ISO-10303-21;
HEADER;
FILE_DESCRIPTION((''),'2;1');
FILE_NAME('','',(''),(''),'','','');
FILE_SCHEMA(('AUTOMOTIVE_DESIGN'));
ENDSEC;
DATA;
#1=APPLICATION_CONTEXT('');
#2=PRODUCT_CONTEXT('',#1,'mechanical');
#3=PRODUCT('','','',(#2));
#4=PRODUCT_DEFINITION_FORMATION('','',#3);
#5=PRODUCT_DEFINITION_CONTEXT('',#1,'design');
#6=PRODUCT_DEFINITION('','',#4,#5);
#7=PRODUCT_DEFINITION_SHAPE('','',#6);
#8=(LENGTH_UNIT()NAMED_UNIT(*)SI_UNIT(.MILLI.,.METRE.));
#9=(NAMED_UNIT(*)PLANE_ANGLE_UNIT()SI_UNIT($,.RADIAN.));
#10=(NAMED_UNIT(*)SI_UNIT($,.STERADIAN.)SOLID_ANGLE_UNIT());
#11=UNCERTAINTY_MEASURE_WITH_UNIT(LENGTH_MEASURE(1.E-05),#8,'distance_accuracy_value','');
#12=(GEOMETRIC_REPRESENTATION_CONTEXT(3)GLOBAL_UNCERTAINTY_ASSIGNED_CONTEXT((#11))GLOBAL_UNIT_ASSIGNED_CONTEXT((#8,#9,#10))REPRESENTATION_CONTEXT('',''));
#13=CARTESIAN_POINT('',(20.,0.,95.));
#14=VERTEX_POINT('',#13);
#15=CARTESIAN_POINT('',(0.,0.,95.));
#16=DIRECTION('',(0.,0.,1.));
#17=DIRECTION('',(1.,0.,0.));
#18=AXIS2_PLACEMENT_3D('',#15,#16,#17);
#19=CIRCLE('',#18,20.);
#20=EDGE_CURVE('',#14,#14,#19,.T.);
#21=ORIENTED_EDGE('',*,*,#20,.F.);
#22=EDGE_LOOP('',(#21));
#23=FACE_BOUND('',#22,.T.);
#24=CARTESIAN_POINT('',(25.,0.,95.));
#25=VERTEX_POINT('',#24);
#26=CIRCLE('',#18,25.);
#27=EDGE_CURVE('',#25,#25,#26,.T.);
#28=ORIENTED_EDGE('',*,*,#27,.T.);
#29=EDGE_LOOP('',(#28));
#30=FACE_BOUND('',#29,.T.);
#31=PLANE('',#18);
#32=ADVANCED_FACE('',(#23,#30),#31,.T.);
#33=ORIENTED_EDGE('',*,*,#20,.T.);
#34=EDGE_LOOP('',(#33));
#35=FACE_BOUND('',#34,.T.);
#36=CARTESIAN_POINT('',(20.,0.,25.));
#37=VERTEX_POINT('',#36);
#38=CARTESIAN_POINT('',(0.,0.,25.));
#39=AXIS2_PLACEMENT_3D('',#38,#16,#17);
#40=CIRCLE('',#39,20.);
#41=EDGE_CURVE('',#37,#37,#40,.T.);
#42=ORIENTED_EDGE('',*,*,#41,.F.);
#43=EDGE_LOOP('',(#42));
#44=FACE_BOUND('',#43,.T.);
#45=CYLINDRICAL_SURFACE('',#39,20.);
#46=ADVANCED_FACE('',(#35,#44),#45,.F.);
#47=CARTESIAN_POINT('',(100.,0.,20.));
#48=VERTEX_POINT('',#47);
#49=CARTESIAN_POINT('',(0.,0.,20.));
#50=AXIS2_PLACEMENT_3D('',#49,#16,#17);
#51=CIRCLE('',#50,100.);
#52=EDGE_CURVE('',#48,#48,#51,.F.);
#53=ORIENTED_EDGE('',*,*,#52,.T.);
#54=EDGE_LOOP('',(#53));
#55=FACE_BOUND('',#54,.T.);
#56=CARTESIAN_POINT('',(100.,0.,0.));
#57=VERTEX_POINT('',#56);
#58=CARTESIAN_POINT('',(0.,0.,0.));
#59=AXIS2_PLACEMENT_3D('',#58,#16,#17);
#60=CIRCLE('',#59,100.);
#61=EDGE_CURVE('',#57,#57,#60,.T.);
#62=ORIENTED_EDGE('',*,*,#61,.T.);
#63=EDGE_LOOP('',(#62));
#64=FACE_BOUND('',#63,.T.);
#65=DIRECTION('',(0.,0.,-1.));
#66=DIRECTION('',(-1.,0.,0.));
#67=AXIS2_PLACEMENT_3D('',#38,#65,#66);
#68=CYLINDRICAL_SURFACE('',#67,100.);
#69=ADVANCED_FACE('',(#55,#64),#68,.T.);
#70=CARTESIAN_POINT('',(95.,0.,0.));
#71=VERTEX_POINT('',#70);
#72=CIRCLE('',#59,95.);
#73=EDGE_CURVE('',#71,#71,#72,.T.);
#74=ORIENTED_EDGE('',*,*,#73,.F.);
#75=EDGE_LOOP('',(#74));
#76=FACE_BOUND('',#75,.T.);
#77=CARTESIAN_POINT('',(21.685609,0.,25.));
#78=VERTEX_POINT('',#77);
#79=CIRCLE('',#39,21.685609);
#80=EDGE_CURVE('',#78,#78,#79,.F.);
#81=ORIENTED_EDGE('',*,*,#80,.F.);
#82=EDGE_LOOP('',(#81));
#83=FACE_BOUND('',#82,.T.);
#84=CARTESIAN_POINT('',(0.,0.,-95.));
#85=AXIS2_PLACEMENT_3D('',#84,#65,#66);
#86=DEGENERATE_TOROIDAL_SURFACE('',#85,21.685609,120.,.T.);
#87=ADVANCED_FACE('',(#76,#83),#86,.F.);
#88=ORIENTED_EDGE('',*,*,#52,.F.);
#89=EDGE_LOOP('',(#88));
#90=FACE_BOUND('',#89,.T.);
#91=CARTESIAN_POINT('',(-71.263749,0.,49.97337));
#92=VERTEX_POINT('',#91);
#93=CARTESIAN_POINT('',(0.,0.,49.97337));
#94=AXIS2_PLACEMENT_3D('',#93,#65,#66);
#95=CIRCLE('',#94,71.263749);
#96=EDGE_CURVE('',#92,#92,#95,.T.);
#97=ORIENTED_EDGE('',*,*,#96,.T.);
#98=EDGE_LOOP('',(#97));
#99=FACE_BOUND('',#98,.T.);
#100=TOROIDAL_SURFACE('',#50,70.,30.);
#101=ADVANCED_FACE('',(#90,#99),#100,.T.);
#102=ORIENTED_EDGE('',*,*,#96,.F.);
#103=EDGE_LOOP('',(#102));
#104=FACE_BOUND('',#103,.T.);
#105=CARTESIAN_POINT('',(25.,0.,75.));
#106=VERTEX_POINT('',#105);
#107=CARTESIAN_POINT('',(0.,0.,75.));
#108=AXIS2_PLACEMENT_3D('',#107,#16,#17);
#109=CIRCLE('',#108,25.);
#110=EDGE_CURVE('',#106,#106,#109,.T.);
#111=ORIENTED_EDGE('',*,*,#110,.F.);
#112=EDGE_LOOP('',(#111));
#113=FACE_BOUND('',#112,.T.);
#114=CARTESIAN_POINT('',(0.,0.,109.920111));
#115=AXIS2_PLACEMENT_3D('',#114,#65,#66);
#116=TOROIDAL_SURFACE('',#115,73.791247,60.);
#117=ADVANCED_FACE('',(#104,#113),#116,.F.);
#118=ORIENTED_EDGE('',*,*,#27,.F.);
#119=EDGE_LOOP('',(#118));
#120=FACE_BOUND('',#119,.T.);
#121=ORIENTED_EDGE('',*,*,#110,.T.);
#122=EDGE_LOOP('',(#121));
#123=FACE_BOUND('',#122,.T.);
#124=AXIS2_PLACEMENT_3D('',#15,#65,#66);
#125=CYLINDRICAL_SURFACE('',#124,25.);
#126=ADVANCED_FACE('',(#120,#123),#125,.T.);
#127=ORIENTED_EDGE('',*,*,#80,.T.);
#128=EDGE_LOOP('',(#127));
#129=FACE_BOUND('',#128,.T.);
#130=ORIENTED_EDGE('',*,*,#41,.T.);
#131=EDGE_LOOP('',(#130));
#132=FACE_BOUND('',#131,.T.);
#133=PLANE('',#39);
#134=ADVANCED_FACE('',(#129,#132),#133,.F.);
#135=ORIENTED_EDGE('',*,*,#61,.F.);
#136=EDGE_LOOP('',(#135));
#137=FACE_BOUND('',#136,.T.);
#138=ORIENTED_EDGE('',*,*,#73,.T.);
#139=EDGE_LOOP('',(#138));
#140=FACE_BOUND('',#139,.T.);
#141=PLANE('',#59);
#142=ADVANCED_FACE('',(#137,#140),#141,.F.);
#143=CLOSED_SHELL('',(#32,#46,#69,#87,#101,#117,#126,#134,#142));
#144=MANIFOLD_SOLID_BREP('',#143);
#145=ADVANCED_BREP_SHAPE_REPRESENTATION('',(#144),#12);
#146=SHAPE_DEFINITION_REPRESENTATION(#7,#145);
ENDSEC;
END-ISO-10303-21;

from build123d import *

# Parameters (mm, degrees)
SKETCH1_R           = 100
SKETCH1_R_2         = 95
BOSS_EXTRUDE1_DEPTH = 25
SKETCH2_R           = 100
BOSS_EXTRUDE2_DEPTH = 25
SKETCH3_R           = 20
CUT_EXTRUDE1_DEPTH  = 25
BOSS_EXTRUDE3_START = 25
SKETCH4_R           = 25
SKETCH4_R_2         = 20
BOSS_EXTRUDE3_DEPTH = 25
FILLET1_R           = 30
FILLET2_R           = 120
FILLET3_R           = 60
BOSS_EXTRUDE4_START = 20
SKETCH5_R           = 25
SKETCH5_R_2         = 20
BOSS_EXTRUDE4_DEPTH = 20


with BuildPart() as part:
    # Sketch1 → Boss-Extrude1 (new body)
    with BuildSketch(Plane.XY):
        Circle(SKETCH1_R)
        Circle(SKETCH1_R_2, mode=Mode.SUBTRACT)
    extrude(amount=BOSS_EXTRUDE1_DEPTH)

    # Sketch2 → Boss-Extrude2 (add)
    with BuildSketch(Plane.XY.offset(25)):
        Circle(SKETCH2_R)
    extrude(amount=BOSS_EXTRUDE2_DEPTH)

    # Sketch3 → Cut-Extrude1 (cut)
    with BuildSketch(Plane.XY.offset(50)):
        Circle(SKETCH3_R)
    extrude(amount=-CUT_EXTRUDE1_DEPTH, mode=Mode.SUBTRACT)

    # Sketch4 → Boss-Extrude3 (add)
    with BuildSketch(Plane.XY.offset(50).offset(BOSS_EXTRUDE3_START)):
        Circle(SKETCH4_R)
        Circle(SKETCH4_R_2, mode=Mode.SUBTRACT)
    extrude(amount=-BOSS_EXTRUDE3_DEPTH)

    # Fillet1
    fillet1_edges = [part.edges().sort_by_distance(p)[0] for p in [
        (-100, 0, 50),
    ]]
    fillet(fillet1_edges, radius=FILLET1_R)

    # Fillet2
    # the kernel refuses this fillet: 120 mm, written as the material it adds along each edge
    with BuildSketch(Plane(origin=(0, 0, 25), x_dir=(1, 0, 0), z_dir=(0, -1, 0))) as fillet2_piece_1:
        with BuildLine():
            CenterArc((21.685608507, -120), FILLET2_R, 52.341537994, 37.658462006)
            Line((21.685608507, 0), (21.685608507, 2.4))
            Line((21.685608507, 2.4), (95, 2.4))
            Line((95, 2.4), (97.4, 0))
            ThreePointArc((97.4, 0), (97.4, -12.5), (96.46628783, -23.1))
            Line((96.46628783, -23.1), (95, -25))
        make_face()
    revolve(axis=Axis((0, 0, 25), (0, 0, 1)))

    # Fillet3
    # the kernel refuses this fillet: 60 mm, written as the material it adds along each edge
    with BuildSketch(Plane(origin=(0, 0, 50), x_dir=(1, 0, 0), z_dir=(0, -1, 0))) as fillet3_piece_1_section:
        with BuildLine():
            CenterArc((73.791247331, 59.920111453), FILLET3_R, 215.59146616, 51.994236434)
            Line((71.26374911, -0.026629516), (71.010999288, -6.021303613))
            ThreePointArc((71.010999288, -6.021303613), (70, -6), (25, -6))
            Line((25, -6), (19, 0))
            ThreePointArc((19, 0), (19, 12.5), (20.120875267, 21.507988855))
            Line((20.120875267, 21.507988855), (25, 25))
        make_face()
    fillet3_piece_1 = revolve(axis=Axis((0, 0, 50), (0, 0, 1)), mode=Mode.PRIVATE)
    fillet3_piece_1 = fillet3_piece_1 - Plane(origin=(0, 0, 57.041337481), x_dir=(1, 0, 0), z_dir=(0, 0, 1)) * Cylinder(20, 286, mode=Mode.PRIVATE)
    add(fillet3_piece_1)

    # Sketch5 → Boss-Extrude4 (add)
    with BuildSketch(Plane.XY.offset(75).offset(BOSS_EXTRUDE4_START)):
        Circle(SKETCH5_R)
        Circle(SKETCH5_R_2, mode=Mode.SUBTRACT)
    extrude(amount=-BOSS_EXTRUDE4_DEPTH)


solid = part.part
